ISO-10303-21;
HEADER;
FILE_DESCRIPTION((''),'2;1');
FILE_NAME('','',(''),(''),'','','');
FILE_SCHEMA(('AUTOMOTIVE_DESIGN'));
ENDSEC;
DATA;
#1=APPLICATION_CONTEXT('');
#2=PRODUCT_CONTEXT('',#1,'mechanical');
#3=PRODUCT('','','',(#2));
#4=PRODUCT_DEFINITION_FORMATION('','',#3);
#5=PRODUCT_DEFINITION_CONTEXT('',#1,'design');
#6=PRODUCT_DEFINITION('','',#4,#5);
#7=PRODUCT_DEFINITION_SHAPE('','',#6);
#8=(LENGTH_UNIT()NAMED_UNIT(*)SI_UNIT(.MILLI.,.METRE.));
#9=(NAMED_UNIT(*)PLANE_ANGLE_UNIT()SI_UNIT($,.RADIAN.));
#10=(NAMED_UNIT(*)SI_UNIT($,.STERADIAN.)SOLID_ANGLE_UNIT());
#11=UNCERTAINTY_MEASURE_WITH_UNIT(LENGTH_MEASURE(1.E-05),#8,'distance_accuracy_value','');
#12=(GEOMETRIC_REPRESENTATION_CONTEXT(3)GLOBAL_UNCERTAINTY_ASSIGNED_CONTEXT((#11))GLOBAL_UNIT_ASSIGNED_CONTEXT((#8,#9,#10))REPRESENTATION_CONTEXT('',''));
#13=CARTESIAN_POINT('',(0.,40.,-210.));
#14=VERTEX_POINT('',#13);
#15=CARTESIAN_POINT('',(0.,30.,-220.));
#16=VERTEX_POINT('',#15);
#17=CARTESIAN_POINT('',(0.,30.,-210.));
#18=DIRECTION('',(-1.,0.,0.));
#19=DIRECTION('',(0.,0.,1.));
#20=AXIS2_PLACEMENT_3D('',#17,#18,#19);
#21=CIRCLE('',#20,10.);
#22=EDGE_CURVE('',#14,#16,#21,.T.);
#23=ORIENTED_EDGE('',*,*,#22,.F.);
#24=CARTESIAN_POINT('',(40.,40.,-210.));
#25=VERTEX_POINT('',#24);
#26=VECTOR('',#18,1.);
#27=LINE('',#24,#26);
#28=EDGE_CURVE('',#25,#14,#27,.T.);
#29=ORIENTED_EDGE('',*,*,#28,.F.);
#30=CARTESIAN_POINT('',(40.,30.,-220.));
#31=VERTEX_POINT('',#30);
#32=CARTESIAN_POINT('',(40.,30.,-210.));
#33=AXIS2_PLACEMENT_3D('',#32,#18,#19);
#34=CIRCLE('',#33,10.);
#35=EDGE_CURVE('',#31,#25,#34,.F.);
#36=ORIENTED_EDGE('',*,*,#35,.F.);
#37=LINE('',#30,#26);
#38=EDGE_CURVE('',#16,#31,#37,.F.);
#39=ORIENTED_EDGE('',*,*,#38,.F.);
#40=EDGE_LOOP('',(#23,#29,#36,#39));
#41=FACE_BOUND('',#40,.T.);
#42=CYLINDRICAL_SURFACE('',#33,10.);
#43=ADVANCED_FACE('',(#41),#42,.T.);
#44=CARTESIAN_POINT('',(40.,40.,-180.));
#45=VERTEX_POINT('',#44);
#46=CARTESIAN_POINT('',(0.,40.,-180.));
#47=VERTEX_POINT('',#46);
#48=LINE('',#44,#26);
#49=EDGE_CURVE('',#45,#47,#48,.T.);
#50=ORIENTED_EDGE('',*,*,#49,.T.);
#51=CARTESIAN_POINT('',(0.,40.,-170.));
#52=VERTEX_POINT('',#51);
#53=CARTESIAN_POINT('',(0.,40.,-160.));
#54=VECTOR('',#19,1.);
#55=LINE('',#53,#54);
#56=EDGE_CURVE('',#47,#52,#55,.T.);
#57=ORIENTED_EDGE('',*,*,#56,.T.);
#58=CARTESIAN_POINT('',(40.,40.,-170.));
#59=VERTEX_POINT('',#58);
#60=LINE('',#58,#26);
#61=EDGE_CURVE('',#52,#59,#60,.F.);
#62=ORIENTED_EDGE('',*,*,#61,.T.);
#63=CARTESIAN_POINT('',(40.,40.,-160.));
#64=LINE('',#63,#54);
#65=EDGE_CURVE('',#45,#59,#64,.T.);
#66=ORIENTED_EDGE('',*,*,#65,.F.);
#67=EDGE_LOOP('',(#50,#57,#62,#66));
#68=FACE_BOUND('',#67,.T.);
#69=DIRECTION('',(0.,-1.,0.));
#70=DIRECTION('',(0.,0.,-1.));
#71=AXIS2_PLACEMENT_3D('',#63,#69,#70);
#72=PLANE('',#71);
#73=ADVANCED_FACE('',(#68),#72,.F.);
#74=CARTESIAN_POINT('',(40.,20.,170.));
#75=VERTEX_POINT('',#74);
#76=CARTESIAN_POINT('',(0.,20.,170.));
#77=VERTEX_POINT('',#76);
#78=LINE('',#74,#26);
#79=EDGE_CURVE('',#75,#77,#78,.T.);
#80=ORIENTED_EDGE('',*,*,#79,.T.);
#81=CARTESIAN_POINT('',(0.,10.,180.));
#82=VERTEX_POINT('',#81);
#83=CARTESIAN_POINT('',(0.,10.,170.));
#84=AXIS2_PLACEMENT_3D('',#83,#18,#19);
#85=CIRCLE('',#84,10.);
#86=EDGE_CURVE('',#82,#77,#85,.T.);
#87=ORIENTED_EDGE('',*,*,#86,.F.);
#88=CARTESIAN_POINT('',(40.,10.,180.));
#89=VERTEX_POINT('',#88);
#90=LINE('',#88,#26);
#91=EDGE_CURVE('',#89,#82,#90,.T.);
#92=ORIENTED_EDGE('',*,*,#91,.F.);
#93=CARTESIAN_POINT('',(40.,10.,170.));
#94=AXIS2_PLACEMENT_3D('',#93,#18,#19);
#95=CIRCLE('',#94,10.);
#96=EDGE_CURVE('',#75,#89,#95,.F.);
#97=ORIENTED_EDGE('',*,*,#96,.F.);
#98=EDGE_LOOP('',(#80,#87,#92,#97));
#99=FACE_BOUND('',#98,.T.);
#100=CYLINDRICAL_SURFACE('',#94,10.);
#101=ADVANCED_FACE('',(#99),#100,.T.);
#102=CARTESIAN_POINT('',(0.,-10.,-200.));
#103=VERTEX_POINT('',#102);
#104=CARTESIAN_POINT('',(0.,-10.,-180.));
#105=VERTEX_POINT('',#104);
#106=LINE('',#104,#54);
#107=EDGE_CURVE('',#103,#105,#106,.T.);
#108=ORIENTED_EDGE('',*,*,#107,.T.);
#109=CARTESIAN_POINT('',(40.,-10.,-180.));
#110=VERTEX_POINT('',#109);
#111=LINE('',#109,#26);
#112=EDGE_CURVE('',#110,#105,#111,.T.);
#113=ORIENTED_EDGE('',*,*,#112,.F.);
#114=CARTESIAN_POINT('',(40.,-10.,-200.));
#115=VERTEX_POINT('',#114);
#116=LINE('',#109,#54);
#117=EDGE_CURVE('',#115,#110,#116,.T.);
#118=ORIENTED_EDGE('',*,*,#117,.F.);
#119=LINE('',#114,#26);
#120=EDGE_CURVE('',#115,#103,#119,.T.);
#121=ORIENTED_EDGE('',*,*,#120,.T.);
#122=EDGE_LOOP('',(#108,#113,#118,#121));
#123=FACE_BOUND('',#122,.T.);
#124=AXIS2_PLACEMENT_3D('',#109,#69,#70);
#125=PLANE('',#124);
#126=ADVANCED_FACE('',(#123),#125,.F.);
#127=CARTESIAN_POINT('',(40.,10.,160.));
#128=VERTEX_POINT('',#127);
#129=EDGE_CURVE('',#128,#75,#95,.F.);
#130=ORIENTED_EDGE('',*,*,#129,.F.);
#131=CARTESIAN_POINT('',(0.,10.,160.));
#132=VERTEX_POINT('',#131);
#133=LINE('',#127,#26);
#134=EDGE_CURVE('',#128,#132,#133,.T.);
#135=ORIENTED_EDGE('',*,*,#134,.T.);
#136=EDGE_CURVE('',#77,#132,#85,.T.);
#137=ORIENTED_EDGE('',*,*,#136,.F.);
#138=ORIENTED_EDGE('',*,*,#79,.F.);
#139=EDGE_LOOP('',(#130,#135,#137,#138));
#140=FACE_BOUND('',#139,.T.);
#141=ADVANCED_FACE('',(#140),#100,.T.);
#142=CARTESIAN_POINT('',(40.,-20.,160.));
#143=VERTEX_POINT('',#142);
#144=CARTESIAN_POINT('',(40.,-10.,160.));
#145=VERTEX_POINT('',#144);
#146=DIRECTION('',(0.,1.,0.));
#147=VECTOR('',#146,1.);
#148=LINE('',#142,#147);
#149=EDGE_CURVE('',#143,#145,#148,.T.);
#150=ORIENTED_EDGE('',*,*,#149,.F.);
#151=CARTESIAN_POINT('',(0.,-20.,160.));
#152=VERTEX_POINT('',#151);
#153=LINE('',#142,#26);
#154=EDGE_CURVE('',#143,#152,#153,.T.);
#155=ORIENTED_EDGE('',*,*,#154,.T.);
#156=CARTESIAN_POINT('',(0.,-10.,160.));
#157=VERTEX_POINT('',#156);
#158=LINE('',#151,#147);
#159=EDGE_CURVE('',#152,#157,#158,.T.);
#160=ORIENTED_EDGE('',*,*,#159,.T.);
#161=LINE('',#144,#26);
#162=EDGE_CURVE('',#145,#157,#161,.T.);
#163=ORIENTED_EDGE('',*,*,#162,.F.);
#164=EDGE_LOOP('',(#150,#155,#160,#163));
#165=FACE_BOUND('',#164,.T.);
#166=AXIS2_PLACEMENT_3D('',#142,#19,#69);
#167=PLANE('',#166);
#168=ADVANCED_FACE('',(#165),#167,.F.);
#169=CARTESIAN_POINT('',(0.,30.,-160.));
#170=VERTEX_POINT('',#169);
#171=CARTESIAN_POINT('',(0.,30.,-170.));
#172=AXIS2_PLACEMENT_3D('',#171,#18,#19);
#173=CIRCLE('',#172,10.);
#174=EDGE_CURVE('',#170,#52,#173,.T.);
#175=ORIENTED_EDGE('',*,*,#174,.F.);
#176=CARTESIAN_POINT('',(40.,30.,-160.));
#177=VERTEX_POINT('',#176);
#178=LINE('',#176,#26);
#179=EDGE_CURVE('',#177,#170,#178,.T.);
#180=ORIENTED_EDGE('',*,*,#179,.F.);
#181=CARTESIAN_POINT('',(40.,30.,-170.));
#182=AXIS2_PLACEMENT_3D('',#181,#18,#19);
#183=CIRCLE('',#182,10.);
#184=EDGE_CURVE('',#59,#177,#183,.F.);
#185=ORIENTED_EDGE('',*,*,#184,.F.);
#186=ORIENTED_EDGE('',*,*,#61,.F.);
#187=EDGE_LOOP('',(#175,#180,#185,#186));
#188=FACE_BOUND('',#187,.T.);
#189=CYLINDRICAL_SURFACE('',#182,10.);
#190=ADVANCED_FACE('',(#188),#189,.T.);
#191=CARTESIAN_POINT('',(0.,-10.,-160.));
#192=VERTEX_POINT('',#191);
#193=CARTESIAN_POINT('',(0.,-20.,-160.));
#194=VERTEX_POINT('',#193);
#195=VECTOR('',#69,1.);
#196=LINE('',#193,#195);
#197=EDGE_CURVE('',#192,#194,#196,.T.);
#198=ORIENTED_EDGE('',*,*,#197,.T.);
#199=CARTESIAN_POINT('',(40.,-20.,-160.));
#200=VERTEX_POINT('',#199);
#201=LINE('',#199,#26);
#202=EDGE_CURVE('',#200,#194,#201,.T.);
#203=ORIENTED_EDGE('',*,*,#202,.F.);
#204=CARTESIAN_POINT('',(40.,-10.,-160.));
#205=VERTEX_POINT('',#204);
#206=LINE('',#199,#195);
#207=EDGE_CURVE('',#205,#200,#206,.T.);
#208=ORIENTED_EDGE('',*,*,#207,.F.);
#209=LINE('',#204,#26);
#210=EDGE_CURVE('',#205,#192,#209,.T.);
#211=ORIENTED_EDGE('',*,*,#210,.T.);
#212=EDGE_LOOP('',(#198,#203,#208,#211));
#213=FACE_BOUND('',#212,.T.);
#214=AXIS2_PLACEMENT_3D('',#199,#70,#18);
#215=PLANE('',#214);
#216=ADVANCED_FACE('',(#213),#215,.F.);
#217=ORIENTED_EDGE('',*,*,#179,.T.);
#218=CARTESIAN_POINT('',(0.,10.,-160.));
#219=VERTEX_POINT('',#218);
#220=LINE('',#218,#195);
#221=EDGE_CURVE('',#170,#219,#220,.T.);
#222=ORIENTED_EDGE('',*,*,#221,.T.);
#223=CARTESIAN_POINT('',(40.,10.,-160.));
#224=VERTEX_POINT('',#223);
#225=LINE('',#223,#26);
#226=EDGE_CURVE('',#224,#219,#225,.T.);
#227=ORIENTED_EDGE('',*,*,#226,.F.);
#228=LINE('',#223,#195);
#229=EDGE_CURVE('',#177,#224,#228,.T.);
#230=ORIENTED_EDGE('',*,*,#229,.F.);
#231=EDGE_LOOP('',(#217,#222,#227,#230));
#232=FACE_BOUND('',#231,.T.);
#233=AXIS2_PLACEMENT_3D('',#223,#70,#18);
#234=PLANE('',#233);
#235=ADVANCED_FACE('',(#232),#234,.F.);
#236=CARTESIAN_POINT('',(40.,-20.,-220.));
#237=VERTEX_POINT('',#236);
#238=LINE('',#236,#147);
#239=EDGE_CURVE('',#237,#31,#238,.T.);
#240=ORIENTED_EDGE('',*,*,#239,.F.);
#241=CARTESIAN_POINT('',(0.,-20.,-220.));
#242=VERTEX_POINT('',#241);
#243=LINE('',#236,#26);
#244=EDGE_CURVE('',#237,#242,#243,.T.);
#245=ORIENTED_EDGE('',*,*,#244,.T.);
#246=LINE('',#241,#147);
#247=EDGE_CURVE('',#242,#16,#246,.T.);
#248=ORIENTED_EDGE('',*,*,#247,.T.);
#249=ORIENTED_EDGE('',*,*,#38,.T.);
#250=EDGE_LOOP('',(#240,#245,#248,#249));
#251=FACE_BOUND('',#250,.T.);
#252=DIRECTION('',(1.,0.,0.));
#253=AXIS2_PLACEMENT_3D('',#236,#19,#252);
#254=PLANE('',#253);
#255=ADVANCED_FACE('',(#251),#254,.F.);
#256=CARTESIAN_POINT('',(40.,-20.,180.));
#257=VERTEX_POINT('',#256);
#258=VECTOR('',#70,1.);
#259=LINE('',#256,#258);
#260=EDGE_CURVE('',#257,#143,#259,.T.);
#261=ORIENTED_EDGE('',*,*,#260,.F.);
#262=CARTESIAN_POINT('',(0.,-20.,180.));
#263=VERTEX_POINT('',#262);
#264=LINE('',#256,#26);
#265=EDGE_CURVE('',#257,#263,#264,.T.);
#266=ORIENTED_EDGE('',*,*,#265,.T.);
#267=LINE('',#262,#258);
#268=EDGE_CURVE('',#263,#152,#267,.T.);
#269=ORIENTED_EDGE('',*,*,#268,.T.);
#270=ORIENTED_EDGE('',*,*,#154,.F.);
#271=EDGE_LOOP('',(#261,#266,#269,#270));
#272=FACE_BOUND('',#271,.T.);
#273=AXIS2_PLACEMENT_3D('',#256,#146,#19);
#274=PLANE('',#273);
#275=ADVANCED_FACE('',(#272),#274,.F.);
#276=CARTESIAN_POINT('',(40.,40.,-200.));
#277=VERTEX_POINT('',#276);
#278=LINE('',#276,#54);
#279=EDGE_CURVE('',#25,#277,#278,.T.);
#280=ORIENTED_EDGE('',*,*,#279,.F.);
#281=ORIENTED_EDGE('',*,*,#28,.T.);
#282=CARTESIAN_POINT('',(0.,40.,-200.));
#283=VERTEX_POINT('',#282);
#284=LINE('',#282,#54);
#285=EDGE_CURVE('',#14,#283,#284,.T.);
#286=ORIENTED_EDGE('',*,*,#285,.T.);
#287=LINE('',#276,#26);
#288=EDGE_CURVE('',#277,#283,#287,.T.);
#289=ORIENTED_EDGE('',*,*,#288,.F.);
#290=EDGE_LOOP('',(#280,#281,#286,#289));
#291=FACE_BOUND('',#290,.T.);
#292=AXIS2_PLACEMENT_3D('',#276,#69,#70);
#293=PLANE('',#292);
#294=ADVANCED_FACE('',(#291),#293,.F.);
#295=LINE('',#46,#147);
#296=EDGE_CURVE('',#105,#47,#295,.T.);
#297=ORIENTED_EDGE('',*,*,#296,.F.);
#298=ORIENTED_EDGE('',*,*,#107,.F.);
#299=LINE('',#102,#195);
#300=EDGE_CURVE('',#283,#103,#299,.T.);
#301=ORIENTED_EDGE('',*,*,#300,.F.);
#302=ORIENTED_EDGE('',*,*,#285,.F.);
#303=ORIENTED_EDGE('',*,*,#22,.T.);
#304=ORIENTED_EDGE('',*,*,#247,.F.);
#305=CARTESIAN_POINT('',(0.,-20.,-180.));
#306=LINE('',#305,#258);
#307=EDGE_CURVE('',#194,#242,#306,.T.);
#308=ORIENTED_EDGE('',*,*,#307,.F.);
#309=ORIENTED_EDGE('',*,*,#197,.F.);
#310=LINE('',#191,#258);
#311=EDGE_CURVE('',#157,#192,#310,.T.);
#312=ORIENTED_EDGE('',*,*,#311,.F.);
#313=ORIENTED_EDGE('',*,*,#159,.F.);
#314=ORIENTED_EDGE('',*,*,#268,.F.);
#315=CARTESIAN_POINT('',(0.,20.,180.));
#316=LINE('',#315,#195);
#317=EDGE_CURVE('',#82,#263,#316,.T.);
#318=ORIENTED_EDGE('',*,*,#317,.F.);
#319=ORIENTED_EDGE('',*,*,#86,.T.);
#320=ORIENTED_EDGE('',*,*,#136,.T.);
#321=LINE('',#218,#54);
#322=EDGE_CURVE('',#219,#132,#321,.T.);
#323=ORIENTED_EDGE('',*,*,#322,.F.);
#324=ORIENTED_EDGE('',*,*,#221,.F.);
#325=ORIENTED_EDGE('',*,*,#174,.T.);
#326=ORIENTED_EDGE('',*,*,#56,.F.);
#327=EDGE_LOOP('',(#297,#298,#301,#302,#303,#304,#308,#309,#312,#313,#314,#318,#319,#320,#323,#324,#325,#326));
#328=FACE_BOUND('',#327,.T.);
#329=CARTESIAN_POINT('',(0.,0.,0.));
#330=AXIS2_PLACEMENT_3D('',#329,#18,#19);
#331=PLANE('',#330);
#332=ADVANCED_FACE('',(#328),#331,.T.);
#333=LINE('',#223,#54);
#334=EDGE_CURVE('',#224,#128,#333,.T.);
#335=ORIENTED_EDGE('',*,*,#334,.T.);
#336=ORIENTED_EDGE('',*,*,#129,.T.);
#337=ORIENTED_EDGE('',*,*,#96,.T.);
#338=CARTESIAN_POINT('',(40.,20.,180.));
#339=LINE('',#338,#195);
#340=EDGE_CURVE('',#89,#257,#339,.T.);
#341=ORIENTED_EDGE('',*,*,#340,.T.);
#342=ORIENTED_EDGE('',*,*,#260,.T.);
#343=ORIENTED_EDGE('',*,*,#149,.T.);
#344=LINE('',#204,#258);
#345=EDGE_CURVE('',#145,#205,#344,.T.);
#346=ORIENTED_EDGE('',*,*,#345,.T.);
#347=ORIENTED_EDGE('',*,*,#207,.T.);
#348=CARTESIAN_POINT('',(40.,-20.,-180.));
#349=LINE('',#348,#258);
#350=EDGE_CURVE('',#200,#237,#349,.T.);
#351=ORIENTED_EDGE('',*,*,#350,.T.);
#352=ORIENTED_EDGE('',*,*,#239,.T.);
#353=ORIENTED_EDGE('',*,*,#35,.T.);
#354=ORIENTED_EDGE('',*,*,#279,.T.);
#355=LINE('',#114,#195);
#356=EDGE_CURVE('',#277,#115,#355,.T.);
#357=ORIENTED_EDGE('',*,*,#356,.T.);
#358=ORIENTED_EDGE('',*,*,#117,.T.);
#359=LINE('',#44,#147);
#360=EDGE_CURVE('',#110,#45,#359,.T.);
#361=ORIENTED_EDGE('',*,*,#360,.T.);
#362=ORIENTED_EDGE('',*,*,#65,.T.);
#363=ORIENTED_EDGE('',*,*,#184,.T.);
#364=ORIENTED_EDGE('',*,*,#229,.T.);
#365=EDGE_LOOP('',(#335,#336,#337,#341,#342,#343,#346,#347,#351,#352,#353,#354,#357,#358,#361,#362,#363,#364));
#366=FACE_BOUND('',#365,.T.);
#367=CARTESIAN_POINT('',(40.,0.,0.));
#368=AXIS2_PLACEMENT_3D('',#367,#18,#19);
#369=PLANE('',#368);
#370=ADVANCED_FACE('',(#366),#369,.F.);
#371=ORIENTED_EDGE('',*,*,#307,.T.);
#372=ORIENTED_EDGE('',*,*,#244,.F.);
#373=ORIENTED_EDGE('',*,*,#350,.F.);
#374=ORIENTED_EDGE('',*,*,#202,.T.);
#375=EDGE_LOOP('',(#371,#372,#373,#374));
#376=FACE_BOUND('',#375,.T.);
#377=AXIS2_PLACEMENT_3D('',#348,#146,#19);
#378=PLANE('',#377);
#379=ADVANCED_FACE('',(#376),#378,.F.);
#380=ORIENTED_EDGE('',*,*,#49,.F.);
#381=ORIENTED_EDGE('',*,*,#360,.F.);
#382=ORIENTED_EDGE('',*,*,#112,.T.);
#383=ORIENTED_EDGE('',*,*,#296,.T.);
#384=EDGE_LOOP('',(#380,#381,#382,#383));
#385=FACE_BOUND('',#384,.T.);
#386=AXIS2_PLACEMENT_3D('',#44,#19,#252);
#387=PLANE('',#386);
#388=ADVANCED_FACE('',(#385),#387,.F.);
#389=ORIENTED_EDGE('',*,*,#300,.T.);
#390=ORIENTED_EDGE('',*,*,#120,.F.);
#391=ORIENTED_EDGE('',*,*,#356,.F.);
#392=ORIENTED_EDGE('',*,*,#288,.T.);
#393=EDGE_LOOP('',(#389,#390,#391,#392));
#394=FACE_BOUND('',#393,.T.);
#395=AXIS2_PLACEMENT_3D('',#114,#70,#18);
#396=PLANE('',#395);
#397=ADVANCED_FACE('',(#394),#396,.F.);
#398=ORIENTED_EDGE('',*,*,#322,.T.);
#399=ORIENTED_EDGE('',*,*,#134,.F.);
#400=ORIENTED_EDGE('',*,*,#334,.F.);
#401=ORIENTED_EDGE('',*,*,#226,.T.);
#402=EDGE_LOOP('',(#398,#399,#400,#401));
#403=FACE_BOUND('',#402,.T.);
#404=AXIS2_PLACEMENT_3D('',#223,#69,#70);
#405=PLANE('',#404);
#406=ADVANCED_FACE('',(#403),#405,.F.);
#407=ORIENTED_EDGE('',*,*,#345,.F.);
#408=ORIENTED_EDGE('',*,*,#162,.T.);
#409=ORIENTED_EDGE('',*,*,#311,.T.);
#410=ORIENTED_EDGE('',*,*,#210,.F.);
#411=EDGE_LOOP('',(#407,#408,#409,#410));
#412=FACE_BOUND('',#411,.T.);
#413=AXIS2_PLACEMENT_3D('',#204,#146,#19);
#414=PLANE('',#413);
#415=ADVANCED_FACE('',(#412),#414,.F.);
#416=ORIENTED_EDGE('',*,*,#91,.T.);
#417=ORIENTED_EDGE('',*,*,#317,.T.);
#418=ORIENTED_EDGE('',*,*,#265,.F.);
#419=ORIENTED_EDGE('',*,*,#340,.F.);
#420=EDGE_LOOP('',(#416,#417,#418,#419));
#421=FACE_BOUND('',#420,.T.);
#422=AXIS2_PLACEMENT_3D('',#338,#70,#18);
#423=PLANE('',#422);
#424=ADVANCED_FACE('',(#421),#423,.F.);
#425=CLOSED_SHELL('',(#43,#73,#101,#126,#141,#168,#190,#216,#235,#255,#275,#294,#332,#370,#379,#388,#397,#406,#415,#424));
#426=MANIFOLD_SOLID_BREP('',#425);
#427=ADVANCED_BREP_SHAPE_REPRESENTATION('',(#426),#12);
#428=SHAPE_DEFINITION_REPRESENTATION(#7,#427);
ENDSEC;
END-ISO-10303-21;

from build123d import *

# Parameters (mm, degrees)
BOSS_EXTRUDE1_DEPTH = 40
FILLET1_R           = 10
FILLET2_R           = 10


with BuildPart() as part:
    # Sketch2 → Boss-Extrude1 (new body)
    with BuildSketch(Plane(origin=(0, 0, 0), x_dir=(0, 0, -1), z_dir=(1, 0, 0))):
        Polygon((-160, 10), (-160, 20), (-180, 20), (-180, -20), (-160, -20), (-160, -10), (160, -10), (160, -20), (180, -20), (220, -20), (220, 40), (200, 40), (200, -10), (180, -10), (180, 40), (160, 40), (160, 10), align=None)
    extrude(amount=BOSS_EXTRUDE1_DEPTH)

    # Fillet1
    fillet1_edges = [part.edges().sort_by_distance(p)[0] for p in [
        (20, 20, 180),
        (20, 20, 160),
    ]]
    fillet(fillet1_edges, radius=FILLET1_R - 0.0001)  # a hair under: the kernel refuses the full size

    # Fillet2
    fillet2_edges = [part.edges().sort_by_distance(p)[0] for p in [
        (20, 40, -160),
        (20, 40, -220),
    ]]
    fillet(fillet2_edges, radius=FILLET2_R)


solid = part.part
